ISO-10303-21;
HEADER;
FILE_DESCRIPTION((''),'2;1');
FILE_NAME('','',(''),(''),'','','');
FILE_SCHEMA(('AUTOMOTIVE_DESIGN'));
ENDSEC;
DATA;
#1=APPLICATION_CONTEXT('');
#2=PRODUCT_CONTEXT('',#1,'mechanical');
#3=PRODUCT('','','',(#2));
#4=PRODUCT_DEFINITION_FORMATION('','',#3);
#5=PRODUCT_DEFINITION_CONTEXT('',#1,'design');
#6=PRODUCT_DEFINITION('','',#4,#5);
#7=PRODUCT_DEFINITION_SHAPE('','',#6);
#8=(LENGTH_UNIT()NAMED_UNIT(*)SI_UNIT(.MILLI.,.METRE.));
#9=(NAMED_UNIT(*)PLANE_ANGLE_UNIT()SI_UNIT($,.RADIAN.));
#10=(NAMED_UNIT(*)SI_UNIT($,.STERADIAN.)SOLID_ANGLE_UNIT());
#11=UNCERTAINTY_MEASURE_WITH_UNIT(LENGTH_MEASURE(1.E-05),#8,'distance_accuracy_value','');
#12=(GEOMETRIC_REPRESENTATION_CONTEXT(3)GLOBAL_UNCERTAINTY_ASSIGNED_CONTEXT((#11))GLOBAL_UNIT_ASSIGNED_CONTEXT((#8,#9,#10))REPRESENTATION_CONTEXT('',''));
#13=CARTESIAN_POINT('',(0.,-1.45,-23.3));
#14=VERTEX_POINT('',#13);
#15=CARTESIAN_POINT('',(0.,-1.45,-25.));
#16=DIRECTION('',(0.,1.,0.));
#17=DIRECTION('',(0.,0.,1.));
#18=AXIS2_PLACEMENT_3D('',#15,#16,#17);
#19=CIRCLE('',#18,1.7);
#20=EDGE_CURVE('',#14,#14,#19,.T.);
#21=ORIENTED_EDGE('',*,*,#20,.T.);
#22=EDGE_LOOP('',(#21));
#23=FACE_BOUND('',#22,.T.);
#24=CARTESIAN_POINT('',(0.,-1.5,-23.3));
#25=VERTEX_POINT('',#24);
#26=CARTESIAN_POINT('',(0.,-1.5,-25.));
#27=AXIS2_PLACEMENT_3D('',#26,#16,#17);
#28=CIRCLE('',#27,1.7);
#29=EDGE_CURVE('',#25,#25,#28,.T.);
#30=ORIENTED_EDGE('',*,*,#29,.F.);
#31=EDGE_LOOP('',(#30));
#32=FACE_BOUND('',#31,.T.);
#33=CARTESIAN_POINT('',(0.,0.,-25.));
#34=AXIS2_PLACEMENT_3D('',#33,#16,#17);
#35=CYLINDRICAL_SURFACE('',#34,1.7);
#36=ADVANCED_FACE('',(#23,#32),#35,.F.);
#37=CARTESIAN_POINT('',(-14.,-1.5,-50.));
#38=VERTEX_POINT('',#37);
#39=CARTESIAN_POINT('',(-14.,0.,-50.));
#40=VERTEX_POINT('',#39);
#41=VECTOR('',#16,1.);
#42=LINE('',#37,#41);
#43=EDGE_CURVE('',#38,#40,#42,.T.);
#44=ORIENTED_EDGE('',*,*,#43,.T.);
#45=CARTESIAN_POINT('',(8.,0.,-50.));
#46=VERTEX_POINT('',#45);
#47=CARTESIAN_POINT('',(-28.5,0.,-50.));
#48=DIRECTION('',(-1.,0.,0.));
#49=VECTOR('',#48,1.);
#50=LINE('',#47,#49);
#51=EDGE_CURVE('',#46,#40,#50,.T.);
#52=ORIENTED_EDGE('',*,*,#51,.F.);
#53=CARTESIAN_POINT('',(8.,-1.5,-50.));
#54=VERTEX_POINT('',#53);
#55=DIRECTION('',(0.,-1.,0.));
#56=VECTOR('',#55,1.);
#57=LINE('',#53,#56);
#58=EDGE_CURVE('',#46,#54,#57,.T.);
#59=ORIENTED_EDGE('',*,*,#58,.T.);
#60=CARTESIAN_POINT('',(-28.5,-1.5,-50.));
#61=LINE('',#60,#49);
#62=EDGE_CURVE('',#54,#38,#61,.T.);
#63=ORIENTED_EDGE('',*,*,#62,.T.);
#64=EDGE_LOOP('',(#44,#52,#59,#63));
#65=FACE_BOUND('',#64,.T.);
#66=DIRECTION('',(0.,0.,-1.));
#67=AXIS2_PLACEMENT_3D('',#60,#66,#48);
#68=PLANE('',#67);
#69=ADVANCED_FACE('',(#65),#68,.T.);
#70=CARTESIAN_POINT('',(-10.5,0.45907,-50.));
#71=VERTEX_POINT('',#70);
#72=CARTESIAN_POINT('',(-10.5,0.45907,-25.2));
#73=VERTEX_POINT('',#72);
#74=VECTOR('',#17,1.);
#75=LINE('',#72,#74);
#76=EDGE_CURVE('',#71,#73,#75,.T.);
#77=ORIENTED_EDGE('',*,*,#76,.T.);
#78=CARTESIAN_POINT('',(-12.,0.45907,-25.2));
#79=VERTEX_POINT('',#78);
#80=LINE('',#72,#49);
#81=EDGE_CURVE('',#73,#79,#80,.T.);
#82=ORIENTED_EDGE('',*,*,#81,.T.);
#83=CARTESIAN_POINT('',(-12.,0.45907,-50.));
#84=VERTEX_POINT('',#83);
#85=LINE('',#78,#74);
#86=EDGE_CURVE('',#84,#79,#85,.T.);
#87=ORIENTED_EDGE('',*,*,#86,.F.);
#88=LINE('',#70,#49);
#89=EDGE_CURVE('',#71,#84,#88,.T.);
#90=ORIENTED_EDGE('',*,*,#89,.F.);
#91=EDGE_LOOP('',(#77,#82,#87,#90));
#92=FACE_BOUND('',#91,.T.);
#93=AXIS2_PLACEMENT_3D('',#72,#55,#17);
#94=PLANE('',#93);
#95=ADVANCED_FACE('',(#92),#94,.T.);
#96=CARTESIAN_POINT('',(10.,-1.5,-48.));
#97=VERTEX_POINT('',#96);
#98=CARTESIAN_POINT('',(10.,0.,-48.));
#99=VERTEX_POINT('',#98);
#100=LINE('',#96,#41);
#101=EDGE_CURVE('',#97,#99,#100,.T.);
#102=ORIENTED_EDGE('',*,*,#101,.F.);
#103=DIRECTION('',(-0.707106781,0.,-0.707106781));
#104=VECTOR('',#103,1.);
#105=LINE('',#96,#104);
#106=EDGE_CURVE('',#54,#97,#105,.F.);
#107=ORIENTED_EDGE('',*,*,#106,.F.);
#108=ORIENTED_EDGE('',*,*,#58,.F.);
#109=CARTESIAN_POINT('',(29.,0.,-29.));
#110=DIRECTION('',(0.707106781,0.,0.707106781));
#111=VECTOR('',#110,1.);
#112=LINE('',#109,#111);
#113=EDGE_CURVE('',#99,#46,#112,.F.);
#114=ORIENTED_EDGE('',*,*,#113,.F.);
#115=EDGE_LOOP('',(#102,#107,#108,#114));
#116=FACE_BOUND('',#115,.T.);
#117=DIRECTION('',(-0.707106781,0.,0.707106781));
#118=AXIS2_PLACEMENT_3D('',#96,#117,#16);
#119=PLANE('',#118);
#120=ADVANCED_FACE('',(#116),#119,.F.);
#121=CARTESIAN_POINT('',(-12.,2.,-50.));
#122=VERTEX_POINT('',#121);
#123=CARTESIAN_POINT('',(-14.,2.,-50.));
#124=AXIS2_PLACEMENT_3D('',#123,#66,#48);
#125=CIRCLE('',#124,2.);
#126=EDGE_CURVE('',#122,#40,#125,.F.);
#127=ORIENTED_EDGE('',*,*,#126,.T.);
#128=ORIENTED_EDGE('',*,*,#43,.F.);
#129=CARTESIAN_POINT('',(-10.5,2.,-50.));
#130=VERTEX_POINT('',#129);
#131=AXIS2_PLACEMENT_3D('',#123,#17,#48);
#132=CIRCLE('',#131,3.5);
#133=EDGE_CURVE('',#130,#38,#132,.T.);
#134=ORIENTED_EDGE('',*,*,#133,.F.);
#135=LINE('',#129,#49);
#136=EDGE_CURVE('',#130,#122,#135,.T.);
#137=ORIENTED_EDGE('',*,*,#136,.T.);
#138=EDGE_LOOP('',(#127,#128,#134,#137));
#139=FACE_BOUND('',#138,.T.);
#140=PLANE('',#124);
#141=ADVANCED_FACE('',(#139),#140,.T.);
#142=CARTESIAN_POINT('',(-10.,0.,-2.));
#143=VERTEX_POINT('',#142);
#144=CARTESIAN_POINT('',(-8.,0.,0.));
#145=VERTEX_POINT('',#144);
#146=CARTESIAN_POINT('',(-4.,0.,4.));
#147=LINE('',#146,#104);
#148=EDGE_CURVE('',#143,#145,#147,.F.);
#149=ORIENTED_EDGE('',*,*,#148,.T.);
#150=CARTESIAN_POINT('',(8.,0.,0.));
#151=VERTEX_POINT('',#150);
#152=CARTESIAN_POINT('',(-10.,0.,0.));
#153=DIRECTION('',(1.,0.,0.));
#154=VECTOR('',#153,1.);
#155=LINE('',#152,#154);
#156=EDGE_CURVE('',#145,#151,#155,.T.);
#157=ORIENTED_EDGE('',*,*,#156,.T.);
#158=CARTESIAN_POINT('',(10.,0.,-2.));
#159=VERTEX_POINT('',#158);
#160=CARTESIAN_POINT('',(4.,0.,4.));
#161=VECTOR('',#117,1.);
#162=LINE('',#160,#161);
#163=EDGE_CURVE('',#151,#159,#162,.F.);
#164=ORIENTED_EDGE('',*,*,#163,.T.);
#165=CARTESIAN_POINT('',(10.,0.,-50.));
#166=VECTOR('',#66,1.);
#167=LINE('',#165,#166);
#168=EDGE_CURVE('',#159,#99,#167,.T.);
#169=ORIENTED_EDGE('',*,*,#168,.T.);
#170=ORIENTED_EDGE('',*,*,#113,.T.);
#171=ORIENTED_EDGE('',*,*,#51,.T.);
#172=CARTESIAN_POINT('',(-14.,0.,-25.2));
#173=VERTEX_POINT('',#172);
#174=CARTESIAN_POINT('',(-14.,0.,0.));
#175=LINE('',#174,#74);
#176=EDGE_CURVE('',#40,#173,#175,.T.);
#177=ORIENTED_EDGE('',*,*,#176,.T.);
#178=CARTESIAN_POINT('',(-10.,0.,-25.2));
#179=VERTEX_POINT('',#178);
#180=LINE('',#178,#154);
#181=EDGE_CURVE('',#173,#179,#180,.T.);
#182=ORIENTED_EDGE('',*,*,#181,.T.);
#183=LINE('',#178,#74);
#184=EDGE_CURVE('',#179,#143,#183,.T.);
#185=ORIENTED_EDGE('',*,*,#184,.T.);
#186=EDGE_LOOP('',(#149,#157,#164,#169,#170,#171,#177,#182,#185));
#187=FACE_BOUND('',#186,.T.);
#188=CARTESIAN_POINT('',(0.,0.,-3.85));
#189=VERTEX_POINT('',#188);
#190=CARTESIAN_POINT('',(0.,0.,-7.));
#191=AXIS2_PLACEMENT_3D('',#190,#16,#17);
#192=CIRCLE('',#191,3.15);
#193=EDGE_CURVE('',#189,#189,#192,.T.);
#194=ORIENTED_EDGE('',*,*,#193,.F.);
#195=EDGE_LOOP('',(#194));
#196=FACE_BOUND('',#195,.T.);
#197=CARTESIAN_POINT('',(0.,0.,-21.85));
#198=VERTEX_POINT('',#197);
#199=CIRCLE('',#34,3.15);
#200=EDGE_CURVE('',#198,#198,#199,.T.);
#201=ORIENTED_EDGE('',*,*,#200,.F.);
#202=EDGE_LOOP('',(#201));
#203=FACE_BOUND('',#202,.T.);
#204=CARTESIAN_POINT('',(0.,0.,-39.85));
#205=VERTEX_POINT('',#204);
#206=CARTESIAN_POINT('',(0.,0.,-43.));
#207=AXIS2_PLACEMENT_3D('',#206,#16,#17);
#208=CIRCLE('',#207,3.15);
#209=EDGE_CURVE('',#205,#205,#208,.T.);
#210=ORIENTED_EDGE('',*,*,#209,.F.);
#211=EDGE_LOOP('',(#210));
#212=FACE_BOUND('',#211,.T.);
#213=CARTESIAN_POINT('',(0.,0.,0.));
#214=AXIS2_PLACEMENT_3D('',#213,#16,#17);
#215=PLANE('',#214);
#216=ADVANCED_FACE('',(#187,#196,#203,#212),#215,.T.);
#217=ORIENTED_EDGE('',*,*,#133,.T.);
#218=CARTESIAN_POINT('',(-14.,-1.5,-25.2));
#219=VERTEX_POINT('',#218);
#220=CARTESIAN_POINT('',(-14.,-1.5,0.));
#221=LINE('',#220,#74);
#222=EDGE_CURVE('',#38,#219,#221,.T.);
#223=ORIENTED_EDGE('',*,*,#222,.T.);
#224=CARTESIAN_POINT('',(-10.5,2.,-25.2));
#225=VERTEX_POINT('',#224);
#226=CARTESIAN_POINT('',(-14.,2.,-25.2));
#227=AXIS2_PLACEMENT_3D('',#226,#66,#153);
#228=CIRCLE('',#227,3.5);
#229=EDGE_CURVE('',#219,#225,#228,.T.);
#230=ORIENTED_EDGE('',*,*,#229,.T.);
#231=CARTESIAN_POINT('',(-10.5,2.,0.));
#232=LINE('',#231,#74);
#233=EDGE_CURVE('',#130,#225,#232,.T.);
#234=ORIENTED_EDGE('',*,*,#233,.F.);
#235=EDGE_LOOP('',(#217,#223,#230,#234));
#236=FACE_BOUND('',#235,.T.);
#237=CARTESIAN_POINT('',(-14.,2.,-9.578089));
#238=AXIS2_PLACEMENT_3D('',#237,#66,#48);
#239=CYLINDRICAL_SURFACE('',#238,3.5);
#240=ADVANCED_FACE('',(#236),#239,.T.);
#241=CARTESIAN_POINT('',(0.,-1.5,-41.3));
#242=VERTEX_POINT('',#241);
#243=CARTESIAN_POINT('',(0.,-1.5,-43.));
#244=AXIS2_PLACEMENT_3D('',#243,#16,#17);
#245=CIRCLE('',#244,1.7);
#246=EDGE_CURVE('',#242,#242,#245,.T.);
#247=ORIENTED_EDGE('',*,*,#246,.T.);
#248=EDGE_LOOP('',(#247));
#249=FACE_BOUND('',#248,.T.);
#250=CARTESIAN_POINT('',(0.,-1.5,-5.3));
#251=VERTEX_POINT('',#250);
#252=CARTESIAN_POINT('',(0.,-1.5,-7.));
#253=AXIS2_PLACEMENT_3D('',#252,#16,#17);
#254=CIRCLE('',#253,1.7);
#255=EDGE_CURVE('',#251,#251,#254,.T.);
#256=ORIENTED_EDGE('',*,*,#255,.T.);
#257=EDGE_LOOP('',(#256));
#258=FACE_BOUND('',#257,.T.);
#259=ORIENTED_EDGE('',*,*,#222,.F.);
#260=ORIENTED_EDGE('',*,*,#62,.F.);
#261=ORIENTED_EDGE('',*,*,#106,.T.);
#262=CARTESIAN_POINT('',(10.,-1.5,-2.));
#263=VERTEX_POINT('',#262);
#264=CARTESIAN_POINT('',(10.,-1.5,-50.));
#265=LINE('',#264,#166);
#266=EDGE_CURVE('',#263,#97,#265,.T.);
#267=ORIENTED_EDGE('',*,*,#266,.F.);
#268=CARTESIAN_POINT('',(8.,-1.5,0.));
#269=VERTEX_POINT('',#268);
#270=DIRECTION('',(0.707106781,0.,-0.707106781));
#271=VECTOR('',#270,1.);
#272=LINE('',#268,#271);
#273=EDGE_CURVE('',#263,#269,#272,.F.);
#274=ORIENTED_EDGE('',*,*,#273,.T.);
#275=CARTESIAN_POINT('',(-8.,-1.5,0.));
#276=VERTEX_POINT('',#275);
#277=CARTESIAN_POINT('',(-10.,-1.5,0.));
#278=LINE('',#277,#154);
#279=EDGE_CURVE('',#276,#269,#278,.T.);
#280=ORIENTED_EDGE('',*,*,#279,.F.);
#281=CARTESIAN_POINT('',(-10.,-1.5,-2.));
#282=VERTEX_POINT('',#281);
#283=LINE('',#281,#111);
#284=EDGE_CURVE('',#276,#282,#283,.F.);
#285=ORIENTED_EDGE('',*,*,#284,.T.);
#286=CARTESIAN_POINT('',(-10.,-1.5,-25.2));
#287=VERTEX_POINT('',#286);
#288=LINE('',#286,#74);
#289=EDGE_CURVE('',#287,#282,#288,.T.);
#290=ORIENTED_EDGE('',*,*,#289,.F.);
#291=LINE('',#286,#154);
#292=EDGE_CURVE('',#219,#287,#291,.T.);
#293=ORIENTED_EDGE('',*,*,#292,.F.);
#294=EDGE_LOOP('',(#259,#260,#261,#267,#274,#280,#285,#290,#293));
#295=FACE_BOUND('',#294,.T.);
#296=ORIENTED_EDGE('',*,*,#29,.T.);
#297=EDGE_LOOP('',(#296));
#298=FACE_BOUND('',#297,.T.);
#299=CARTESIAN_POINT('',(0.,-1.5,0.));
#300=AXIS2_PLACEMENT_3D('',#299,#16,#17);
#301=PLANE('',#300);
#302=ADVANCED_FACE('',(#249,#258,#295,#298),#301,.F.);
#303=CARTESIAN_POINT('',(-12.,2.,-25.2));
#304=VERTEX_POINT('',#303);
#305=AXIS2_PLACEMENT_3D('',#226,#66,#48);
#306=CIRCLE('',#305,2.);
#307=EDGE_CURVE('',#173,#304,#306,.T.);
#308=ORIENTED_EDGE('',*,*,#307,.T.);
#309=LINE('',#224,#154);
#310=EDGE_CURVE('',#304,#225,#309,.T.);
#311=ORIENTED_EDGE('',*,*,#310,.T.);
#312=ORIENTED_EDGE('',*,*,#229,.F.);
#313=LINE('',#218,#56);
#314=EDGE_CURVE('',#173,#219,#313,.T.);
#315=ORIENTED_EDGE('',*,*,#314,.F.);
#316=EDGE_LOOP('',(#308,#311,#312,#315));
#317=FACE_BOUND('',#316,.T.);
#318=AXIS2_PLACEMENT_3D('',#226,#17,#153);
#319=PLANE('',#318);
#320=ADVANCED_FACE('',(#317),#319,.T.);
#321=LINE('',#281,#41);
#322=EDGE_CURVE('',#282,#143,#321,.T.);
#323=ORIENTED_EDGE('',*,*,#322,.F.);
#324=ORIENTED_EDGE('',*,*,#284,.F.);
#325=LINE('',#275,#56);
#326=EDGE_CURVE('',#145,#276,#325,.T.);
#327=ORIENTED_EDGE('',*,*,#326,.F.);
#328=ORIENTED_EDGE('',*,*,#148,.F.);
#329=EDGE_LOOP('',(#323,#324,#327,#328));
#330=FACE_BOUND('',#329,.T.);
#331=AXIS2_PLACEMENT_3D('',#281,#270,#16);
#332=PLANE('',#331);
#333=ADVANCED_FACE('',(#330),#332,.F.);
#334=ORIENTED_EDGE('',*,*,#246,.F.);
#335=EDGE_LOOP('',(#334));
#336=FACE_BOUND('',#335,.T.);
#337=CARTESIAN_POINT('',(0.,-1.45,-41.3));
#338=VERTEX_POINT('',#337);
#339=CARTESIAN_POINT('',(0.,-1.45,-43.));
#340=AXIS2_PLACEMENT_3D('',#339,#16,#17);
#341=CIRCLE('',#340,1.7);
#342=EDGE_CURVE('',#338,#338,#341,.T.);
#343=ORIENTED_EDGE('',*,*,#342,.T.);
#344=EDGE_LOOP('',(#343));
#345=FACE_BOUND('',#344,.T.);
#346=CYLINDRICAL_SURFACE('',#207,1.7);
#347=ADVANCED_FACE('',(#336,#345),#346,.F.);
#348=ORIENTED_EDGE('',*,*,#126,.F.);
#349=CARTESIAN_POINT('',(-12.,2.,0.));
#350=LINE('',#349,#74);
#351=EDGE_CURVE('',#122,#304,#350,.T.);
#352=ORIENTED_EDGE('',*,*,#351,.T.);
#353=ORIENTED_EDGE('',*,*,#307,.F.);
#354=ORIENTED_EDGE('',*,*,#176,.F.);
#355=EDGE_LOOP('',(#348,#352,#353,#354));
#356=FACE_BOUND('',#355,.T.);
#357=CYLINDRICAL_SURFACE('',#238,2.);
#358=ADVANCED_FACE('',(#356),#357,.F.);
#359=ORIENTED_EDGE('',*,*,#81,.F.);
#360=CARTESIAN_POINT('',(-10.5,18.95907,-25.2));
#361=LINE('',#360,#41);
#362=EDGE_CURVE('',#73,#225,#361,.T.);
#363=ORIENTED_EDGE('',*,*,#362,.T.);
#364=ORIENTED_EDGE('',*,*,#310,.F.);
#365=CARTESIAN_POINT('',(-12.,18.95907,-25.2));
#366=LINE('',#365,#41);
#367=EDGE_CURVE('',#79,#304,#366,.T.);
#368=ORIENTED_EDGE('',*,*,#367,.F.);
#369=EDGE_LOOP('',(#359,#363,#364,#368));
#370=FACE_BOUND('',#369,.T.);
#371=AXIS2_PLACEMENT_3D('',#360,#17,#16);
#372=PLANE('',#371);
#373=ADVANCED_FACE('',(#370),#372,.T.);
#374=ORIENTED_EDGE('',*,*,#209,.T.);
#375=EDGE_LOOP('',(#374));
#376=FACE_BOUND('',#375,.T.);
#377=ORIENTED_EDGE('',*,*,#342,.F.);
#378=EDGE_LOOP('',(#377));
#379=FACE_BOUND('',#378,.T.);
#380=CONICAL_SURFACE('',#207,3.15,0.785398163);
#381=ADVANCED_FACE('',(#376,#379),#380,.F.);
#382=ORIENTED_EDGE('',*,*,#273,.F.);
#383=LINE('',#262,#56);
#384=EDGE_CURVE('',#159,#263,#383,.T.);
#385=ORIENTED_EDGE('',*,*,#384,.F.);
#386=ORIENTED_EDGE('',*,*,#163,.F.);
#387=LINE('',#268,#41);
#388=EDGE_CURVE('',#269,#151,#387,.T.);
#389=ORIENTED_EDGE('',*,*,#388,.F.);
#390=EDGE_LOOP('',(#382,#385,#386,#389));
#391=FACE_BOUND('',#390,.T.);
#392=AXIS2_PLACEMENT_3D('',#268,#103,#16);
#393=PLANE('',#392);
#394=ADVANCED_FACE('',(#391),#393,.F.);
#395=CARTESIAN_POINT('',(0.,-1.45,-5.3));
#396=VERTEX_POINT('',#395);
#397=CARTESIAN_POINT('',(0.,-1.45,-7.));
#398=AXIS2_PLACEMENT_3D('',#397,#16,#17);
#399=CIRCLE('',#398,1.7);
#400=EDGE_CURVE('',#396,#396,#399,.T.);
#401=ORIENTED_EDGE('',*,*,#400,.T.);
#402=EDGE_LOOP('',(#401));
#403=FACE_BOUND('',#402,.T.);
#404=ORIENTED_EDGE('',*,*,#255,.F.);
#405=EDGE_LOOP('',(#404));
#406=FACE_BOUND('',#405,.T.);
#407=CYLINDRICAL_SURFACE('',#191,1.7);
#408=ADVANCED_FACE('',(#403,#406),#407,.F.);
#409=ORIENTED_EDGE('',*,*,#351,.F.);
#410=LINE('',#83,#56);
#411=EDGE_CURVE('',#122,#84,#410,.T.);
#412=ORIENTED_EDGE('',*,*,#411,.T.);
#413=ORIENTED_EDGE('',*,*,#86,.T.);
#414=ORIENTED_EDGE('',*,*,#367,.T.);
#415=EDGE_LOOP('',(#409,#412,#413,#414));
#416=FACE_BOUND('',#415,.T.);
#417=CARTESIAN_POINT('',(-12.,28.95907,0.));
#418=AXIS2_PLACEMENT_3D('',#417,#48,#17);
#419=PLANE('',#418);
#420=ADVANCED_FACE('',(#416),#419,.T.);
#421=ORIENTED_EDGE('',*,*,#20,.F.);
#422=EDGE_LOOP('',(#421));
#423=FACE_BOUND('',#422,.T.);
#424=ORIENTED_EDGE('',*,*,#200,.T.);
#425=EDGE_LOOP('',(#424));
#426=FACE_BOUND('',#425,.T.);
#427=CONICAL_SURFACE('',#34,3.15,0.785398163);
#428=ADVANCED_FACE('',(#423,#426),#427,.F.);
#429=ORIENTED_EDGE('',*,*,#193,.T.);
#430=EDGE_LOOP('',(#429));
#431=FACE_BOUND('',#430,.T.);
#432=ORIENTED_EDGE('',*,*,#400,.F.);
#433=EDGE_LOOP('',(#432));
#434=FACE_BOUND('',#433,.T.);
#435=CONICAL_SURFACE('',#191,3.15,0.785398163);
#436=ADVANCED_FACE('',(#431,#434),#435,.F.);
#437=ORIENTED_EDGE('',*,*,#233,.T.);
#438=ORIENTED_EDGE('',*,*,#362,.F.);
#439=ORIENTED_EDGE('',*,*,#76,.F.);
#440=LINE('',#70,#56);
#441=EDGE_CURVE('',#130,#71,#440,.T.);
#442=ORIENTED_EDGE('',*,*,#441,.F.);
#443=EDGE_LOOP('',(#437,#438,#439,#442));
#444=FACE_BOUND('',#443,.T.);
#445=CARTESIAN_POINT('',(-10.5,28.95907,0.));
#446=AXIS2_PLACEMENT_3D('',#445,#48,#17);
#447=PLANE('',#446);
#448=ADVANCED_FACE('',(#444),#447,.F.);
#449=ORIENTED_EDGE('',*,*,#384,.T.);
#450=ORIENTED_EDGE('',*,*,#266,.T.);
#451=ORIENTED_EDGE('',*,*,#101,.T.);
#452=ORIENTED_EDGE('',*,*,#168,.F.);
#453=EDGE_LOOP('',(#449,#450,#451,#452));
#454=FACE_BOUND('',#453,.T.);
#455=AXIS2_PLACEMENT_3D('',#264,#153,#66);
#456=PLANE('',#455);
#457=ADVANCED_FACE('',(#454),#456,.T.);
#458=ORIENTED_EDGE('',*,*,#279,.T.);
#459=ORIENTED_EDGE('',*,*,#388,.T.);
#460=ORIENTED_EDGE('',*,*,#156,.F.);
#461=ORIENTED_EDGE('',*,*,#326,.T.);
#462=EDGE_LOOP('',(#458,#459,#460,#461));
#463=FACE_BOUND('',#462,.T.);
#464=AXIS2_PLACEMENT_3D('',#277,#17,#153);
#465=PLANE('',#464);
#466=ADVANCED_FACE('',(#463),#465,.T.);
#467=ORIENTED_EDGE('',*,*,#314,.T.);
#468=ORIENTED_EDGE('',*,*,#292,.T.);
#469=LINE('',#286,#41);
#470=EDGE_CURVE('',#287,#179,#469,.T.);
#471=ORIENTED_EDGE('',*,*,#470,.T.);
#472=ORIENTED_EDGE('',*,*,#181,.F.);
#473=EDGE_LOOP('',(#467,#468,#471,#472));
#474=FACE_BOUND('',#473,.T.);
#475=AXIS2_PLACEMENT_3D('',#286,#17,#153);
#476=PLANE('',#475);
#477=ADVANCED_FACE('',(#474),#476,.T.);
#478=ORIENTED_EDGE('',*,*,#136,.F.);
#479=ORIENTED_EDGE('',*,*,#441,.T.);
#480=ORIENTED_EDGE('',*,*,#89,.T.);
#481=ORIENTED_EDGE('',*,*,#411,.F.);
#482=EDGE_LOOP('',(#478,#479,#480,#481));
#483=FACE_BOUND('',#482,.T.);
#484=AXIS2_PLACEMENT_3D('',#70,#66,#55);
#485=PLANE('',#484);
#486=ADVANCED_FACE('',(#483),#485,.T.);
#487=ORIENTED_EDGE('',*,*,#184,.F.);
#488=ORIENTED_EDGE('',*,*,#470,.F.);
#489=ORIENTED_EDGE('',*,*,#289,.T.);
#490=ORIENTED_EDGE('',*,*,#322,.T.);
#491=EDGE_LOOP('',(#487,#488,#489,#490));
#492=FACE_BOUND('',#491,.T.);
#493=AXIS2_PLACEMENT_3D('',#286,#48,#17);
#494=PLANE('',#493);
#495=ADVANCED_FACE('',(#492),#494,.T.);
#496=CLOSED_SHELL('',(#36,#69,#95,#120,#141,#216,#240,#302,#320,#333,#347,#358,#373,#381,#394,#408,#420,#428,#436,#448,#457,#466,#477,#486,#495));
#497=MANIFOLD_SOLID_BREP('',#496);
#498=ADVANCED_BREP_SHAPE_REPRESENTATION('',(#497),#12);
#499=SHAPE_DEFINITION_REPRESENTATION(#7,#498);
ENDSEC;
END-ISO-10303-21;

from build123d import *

# Parameters (mm, degrees)
BASE_FLANGE1_DEPTH                           = 1.5
CHAMFER1_SIZE                                = 2
CSK_FOR_M3_COUNTERSUNK_FLAT_HEAD_SCR_2_COUNT = 2
CSK_FOR_M3_COUNTERSUNK_FLAT_HEAD_SCR_2_PITCH = 18
CSK_FOR_M3_COUNTERSUNK_FLAT_HEAD_SCR_3_COUNT = 2
CSK_FOR_M3_COUNTERSUNK_FLAT_HEAD_SCR_3_PITCH = 36
SKETCHED_START                               = -50
SKETCHED_BEND1_DEPTH                         = 24.8
SKETCHED_BEND1_2_DEPTH                       = 24.8


# Read off the part's stored shape, not the designer's step: Sketched Bend1
# Sheet-metal steps are written as plain solids
with BuildPart() as part:
    # Sketch1 → Base-Flange1 (new body)
    with BuildSketch(Plane(origin=(0, 0, 0), x_dir=(1, 0, 0), z_dir=(0, 1, 0))):
        Polygon((-28.5, 50), (10, 50), (10, 0), (-10, 0), (-10, 25.2), (-28.5, 25.2), align=None)
    extrude(amount=-BASE_FLANGE1_DEPTH)

    # Chamfer1
    chamfer1_edges = [part.edges().sort_by_distance(p)[0] for p in [
        (10, -0.75, 0),
        (-10, -0.75, 0),
        (10, -0.75, -50),
    ]]
    chamfer(chamfer1_edges, length=CHAMFER1_SIZE)

    # Sketch7 → CSK for M3 Countersunk Flat Head Screw1 (revolve, cut)
    with BuildSketch(Plane(origin=(0, 0, -43), x_dir=(0, 0, 1), z_dir=(1, 0, 0))):
        Polygon((0, 0), (0, 1.5), (1.7, 1.5), (1.7, 1.45), (3.15, 0), align=None)
    csk_for_m3_countersunk_flat_head_screw1 = revolve(axis=Axis((0, 6.35, -43), (0, -1, 0)), mode=Mode.SUBTRACT)

    # CSK for M3 Countersunk Flat Head Scr 2: CSK for M3 Countersunk Flat Head Screw1 ×2
    with Locations(*[(0, 0, i * CSK_FOR_M3_COUNTERSUNK_FLAT_HEAD_SCR_2_PITCH) for i in range(1, CSK_FOR_M3_COUNTERSUNK_FLAT_HEAD_SCR_2_COUNT)]):
        add(csk_for_m3_countersunk_flat_head_screw1, mode=Mode.SUBTRACT)

    # CSK for M3 Countersunk Flat Head Scr 3: CSK for M3 Countersunk Flat Head Screw1 ×2
    with Locations(*[(0, 0, i * CSK_FOR_M3_COUNTERSUNK_FLAT_HEAD_SCR_3_PITCH) for i in range(1, CSK_FOR_M3_COUNTERSUNK_FLAT_HEAD_SCR_3_COUNT)]):
        add(csk_for_m3_countersunk_flat_head_screw1, mode=Mode.SUBTRACT)

    # Sketched Bend1 outline → Sketched Bend1 (cut)
    with BuildSketch(Plane.XY.offset(SKETCHED_START)):
        with BuildLine():
            ThreePointArc((-14, -1.5), (-15.620185175, -1.102418411), (-16.872281323, 0))
            Line((-16.872281323, 0), (-28.5, 0))
            Line((-28.5, 0), (-28.5, -1.5))
            Line((-28.5, -1.5), (-14, -1.5))
        make_face()
    extrude(amount=SKETCHED_BEND1_DEPTH, mode=Mode.SUBTRACT)

    # Sketched Bend1 2 outline → Sketched Bend1 2 (add)
    with BuildSketch(Plane.XY.offset(SKETCHED_START)):
        with BuildLine():
            Line((-10.5, 0.459069696), (-10.5, 2))
            ThreePointArc((-10.5, 2), (-15.048097173, 5.33938502), (-16.872281323, 0))
            Line((-16.872281323, 0), (-14, 0))
            ThreePointArc((-14, 0), (-15.414213562, 3.414213562), (-12, 2))
            Line((-12, 2), (-12, 0.459069696))
            Line((-12, 0.459069696), (-10.5, 0.459069696))
        make_face()
    extrude(amount=SKETCHED_BEND1_2_DEPTH)


solid = part.part
